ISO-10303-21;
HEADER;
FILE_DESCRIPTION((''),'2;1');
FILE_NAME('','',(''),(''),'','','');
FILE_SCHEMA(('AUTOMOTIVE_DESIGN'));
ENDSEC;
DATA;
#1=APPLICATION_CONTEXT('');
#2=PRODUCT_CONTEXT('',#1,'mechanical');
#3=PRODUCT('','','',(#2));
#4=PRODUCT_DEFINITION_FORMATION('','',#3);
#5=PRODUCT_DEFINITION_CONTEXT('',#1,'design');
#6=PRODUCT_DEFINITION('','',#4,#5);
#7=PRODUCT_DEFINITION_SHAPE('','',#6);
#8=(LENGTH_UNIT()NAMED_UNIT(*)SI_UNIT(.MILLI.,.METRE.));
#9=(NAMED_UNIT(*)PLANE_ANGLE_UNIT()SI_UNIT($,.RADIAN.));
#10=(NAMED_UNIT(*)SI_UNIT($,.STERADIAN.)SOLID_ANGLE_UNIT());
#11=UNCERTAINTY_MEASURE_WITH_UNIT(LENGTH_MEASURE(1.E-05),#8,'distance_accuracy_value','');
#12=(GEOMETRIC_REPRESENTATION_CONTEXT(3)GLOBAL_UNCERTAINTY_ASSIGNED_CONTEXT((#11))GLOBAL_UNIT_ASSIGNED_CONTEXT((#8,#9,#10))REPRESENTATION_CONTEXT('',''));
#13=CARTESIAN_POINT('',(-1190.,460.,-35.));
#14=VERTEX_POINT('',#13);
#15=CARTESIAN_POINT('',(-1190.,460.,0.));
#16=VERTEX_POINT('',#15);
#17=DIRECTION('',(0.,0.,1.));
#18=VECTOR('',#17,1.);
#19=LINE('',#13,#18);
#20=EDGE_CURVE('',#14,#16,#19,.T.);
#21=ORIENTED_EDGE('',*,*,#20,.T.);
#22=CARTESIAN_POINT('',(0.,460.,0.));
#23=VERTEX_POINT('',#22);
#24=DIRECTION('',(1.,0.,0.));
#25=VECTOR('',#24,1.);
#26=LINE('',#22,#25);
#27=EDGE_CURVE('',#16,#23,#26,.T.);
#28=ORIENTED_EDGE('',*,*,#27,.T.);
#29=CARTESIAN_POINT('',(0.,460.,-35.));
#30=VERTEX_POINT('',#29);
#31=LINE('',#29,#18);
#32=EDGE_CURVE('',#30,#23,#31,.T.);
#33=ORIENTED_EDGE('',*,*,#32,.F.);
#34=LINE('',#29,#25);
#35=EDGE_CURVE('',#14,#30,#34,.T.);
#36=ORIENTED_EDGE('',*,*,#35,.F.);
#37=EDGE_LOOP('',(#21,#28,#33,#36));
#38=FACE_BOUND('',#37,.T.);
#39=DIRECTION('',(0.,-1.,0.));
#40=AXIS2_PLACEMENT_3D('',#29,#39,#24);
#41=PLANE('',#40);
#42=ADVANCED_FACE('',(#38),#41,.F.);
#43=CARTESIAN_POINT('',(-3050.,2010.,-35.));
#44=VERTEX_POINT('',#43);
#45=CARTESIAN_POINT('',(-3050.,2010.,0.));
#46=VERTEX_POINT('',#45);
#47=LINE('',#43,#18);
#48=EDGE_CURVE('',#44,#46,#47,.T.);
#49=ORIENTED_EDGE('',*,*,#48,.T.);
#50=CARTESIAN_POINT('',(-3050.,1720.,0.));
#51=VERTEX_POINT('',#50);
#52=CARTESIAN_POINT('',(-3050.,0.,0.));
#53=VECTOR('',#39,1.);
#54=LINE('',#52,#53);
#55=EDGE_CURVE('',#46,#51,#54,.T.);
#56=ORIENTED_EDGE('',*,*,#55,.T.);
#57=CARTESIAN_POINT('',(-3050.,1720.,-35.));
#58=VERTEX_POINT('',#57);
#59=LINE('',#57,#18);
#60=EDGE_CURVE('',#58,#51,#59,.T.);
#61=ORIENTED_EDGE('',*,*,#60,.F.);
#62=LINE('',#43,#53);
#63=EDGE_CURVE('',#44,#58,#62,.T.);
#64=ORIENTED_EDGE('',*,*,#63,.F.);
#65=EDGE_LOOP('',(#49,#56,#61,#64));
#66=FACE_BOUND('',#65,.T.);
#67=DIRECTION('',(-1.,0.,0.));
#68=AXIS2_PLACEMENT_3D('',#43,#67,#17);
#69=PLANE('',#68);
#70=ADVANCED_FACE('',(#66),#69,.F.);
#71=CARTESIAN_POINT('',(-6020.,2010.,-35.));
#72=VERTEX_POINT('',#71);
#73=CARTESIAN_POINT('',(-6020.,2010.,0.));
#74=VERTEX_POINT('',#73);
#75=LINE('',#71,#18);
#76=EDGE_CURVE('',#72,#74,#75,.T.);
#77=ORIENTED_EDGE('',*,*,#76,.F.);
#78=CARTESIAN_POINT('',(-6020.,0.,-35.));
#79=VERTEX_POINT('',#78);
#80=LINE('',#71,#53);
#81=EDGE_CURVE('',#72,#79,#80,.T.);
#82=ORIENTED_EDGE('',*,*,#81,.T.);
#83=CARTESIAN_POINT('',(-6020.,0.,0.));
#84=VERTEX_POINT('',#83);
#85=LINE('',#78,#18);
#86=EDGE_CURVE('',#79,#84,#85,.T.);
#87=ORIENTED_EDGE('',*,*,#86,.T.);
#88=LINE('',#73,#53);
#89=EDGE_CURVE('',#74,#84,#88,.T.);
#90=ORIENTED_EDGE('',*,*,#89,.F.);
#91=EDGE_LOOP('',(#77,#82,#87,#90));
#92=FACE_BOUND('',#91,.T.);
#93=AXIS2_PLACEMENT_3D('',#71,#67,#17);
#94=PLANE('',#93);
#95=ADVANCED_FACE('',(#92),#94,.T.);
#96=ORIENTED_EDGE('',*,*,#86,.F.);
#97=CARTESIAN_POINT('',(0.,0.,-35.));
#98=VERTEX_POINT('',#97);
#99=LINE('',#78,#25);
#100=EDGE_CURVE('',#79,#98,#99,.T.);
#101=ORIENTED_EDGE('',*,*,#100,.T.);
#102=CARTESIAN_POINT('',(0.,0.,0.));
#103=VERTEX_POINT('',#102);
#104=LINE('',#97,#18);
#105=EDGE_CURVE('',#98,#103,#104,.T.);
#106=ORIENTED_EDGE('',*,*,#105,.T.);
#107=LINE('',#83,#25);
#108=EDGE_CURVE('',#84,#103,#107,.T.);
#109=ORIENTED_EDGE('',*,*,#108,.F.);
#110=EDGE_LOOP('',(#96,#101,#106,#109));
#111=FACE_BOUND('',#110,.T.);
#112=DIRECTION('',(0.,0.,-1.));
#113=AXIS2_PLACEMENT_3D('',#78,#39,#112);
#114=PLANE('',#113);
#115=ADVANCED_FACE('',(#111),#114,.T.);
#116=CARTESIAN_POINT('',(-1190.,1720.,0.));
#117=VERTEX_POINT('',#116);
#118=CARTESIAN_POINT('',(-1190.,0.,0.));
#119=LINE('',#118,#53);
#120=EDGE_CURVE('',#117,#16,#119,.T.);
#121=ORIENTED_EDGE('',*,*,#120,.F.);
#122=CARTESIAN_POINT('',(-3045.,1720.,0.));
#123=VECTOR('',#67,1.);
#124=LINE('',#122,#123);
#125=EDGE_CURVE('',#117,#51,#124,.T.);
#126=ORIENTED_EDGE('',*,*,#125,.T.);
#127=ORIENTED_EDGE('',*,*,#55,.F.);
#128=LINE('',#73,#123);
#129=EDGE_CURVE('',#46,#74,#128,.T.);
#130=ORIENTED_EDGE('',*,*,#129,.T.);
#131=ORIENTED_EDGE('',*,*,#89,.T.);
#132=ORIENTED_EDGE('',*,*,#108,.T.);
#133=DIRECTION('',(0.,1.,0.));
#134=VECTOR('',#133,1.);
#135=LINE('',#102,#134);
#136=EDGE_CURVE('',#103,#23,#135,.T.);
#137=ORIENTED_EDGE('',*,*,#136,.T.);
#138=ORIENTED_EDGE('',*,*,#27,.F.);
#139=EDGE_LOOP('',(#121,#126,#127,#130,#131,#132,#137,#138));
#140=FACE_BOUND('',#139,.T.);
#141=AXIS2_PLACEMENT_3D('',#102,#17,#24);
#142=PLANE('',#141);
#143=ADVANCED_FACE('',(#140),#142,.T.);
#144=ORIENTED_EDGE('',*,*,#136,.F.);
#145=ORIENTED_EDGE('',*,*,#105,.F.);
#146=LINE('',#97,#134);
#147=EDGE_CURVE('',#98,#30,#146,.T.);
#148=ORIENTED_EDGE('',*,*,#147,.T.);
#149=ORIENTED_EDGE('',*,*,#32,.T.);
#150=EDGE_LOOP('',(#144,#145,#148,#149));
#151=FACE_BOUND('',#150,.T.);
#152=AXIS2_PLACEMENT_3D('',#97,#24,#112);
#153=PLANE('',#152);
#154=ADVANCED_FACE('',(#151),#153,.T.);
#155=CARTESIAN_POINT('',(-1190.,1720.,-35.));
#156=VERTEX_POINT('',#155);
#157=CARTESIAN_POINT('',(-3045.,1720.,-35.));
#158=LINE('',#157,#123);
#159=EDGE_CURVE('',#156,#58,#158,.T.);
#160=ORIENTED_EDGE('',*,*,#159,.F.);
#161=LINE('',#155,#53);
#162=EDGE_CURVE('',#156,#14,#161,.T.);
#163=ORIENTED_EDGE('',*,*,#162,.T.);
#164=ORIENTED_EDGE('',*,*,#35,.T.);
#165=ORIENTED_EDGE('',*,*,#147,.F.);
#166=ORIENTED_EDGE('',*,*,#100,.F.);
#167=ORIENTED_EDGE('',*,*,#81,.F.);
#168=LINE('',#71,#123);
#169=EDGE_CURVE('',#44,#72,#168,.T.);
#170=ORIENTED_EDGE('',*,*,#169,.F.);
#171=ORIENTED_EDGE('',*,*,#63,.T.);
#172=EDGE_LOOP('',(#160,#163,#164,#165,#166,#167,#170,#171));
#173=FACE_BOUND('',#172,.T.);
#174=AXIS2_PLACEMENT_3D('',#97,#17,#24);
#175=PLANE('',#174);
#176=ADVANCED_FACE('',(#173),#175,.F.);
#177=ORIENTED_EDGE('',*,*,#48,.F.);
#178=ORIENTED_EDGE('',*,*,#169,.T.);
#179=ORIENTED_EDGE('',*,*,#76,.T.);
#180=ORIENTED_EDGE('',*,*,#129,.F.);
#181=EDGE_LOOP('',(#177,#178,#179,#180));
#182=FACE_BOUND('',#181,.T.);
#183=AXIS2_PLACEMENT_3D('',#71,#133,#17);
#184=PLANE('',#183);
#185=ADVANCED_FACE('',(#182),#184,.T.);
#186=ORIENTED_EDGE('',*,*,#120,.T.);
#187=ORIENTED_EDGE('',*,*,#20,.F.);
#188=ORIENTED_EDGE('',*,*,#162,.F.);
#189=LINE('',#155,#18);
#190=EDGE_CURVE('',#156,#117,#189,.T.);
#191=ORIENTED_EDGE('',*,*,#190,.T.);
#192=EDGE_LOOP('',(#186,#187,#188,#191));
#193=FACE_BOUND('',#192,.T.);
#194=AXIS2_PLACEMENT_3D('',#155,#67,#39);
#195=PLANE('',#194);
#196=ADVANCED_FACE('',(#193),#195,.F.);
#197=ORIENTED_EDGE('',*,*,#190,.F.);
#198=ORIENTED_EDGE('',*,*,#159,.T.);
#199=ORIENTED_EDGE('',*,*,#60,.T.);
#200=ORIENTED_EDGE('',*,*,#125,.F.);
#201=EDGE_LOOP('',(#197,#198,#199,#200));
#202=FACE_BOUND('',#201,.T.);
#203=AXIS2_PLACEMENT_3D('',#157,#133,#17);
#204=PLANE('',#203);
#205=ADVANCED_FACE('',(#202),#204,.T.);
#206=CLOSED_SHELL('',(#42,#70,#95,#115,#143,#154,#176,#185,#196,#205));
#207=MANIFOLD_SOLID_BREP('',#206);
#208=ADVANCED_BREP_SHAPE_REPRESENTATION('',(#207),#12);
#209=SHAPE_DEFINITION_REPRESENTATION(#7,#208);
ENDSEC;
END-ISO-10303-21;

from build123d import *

# Parameters (mm, degrees)
TABAN_FLAN_1_DEPTH         = 35
KES_EKSTR_ZYON1_DEPTH      = 6347.788558003
KES_EKSTR_ZYON1_DEPTH_BACK = 6347.788558003
IZIM2_W                    = 360
IZIM2_H                    = 1260
KES_EKSTR_ZYON2_DEPTH      = 6347.788558003
KES_EKSTR_ZYON2_DEPTH_BACK = 6347.788558003
IZIM3_W                    = 570
IZIM3_H                    = 1260
IZIM3_W_2                  = 5
IZIM3_H_2                  = 290
KES_EKSTR_ZYON3_DEPTH      = 6347.788558003
KES_EKSTR_ZYON3_DEPTH_BACK = 6347.788558003
IZIM4_W                    = 260
IZIM4_H                    = 1260


# Sheet-metal steps are written as plain solids
with BuildPart() as part:
    # Çizim1 → Taban-Flanş1 (new body)
    with BuildSketch(Plane.XY):
        Polygon((0, 0), (0, 1720), (-3045, 1720), (-3045, 2010), (-6020, 2010), (-6020, 0), align=None)
    extrude(amount=-TABAN_FLAN_1_DEPTH)

    # Çizim2 → Kes-Ekstrüzyon1 (cut, two sides: drawn at the far end of the back side and taken through both)
    with BuildSketch(Plane.XY.offset(-KES_EKSTR_ZYON1_DEPTH_BACK)):
        with Locations((-180, 1090)):
            Rectangle(IZIM2_W, IZIM2_H)
    extrude(amount=KES_EKSTR_ZYON1_DEPTH + KES_EKSTR_ZYON1_DEPTH_BACK, mode=Mode.SUBTRACT)

    # Çizim3 → Kes-Ekstrüzyon2 (cut, two sides: drawn at the far end of the back side and taken through both)
    with BuildSketch(Plane.XY.offset(-KES_EKSTR_ZYON2_DEPTH_BACK)):
        with Locations((-645, 1090)):
            Rectangle(IZIM3_W, IZIM3_H)
        with Locations((-3047.5, 1865)):
            Rectangle(IZIM3_W_2, IZIM3_H_2)
    extrude(amount=KES_EKSTR_ZYON2_DEPTH + KES_EKSTR_ZYON2_DEPTH_BACK, mode=Mode.SUBTRACT)

    # Çizim4 → Kes-Ekstrüzyon3 (cut, two sides: drawn at the far end of the back side and taken through both)
    with BuildSketch(Plane.XY.offset(-KES_EKSTR_ZYON3_DEPTH_BACK)):
        with Locations((-1060, 1090)):
            Rectangle(IZIM4_W, IZIM4_H)
    extrude(amount=KES_EKSTR_ZYON3_DEPTH + KES_EKSTR_ZYON3_DEPTH_BACK, mode=Mode.SUBTRACT)


solid = part.part
